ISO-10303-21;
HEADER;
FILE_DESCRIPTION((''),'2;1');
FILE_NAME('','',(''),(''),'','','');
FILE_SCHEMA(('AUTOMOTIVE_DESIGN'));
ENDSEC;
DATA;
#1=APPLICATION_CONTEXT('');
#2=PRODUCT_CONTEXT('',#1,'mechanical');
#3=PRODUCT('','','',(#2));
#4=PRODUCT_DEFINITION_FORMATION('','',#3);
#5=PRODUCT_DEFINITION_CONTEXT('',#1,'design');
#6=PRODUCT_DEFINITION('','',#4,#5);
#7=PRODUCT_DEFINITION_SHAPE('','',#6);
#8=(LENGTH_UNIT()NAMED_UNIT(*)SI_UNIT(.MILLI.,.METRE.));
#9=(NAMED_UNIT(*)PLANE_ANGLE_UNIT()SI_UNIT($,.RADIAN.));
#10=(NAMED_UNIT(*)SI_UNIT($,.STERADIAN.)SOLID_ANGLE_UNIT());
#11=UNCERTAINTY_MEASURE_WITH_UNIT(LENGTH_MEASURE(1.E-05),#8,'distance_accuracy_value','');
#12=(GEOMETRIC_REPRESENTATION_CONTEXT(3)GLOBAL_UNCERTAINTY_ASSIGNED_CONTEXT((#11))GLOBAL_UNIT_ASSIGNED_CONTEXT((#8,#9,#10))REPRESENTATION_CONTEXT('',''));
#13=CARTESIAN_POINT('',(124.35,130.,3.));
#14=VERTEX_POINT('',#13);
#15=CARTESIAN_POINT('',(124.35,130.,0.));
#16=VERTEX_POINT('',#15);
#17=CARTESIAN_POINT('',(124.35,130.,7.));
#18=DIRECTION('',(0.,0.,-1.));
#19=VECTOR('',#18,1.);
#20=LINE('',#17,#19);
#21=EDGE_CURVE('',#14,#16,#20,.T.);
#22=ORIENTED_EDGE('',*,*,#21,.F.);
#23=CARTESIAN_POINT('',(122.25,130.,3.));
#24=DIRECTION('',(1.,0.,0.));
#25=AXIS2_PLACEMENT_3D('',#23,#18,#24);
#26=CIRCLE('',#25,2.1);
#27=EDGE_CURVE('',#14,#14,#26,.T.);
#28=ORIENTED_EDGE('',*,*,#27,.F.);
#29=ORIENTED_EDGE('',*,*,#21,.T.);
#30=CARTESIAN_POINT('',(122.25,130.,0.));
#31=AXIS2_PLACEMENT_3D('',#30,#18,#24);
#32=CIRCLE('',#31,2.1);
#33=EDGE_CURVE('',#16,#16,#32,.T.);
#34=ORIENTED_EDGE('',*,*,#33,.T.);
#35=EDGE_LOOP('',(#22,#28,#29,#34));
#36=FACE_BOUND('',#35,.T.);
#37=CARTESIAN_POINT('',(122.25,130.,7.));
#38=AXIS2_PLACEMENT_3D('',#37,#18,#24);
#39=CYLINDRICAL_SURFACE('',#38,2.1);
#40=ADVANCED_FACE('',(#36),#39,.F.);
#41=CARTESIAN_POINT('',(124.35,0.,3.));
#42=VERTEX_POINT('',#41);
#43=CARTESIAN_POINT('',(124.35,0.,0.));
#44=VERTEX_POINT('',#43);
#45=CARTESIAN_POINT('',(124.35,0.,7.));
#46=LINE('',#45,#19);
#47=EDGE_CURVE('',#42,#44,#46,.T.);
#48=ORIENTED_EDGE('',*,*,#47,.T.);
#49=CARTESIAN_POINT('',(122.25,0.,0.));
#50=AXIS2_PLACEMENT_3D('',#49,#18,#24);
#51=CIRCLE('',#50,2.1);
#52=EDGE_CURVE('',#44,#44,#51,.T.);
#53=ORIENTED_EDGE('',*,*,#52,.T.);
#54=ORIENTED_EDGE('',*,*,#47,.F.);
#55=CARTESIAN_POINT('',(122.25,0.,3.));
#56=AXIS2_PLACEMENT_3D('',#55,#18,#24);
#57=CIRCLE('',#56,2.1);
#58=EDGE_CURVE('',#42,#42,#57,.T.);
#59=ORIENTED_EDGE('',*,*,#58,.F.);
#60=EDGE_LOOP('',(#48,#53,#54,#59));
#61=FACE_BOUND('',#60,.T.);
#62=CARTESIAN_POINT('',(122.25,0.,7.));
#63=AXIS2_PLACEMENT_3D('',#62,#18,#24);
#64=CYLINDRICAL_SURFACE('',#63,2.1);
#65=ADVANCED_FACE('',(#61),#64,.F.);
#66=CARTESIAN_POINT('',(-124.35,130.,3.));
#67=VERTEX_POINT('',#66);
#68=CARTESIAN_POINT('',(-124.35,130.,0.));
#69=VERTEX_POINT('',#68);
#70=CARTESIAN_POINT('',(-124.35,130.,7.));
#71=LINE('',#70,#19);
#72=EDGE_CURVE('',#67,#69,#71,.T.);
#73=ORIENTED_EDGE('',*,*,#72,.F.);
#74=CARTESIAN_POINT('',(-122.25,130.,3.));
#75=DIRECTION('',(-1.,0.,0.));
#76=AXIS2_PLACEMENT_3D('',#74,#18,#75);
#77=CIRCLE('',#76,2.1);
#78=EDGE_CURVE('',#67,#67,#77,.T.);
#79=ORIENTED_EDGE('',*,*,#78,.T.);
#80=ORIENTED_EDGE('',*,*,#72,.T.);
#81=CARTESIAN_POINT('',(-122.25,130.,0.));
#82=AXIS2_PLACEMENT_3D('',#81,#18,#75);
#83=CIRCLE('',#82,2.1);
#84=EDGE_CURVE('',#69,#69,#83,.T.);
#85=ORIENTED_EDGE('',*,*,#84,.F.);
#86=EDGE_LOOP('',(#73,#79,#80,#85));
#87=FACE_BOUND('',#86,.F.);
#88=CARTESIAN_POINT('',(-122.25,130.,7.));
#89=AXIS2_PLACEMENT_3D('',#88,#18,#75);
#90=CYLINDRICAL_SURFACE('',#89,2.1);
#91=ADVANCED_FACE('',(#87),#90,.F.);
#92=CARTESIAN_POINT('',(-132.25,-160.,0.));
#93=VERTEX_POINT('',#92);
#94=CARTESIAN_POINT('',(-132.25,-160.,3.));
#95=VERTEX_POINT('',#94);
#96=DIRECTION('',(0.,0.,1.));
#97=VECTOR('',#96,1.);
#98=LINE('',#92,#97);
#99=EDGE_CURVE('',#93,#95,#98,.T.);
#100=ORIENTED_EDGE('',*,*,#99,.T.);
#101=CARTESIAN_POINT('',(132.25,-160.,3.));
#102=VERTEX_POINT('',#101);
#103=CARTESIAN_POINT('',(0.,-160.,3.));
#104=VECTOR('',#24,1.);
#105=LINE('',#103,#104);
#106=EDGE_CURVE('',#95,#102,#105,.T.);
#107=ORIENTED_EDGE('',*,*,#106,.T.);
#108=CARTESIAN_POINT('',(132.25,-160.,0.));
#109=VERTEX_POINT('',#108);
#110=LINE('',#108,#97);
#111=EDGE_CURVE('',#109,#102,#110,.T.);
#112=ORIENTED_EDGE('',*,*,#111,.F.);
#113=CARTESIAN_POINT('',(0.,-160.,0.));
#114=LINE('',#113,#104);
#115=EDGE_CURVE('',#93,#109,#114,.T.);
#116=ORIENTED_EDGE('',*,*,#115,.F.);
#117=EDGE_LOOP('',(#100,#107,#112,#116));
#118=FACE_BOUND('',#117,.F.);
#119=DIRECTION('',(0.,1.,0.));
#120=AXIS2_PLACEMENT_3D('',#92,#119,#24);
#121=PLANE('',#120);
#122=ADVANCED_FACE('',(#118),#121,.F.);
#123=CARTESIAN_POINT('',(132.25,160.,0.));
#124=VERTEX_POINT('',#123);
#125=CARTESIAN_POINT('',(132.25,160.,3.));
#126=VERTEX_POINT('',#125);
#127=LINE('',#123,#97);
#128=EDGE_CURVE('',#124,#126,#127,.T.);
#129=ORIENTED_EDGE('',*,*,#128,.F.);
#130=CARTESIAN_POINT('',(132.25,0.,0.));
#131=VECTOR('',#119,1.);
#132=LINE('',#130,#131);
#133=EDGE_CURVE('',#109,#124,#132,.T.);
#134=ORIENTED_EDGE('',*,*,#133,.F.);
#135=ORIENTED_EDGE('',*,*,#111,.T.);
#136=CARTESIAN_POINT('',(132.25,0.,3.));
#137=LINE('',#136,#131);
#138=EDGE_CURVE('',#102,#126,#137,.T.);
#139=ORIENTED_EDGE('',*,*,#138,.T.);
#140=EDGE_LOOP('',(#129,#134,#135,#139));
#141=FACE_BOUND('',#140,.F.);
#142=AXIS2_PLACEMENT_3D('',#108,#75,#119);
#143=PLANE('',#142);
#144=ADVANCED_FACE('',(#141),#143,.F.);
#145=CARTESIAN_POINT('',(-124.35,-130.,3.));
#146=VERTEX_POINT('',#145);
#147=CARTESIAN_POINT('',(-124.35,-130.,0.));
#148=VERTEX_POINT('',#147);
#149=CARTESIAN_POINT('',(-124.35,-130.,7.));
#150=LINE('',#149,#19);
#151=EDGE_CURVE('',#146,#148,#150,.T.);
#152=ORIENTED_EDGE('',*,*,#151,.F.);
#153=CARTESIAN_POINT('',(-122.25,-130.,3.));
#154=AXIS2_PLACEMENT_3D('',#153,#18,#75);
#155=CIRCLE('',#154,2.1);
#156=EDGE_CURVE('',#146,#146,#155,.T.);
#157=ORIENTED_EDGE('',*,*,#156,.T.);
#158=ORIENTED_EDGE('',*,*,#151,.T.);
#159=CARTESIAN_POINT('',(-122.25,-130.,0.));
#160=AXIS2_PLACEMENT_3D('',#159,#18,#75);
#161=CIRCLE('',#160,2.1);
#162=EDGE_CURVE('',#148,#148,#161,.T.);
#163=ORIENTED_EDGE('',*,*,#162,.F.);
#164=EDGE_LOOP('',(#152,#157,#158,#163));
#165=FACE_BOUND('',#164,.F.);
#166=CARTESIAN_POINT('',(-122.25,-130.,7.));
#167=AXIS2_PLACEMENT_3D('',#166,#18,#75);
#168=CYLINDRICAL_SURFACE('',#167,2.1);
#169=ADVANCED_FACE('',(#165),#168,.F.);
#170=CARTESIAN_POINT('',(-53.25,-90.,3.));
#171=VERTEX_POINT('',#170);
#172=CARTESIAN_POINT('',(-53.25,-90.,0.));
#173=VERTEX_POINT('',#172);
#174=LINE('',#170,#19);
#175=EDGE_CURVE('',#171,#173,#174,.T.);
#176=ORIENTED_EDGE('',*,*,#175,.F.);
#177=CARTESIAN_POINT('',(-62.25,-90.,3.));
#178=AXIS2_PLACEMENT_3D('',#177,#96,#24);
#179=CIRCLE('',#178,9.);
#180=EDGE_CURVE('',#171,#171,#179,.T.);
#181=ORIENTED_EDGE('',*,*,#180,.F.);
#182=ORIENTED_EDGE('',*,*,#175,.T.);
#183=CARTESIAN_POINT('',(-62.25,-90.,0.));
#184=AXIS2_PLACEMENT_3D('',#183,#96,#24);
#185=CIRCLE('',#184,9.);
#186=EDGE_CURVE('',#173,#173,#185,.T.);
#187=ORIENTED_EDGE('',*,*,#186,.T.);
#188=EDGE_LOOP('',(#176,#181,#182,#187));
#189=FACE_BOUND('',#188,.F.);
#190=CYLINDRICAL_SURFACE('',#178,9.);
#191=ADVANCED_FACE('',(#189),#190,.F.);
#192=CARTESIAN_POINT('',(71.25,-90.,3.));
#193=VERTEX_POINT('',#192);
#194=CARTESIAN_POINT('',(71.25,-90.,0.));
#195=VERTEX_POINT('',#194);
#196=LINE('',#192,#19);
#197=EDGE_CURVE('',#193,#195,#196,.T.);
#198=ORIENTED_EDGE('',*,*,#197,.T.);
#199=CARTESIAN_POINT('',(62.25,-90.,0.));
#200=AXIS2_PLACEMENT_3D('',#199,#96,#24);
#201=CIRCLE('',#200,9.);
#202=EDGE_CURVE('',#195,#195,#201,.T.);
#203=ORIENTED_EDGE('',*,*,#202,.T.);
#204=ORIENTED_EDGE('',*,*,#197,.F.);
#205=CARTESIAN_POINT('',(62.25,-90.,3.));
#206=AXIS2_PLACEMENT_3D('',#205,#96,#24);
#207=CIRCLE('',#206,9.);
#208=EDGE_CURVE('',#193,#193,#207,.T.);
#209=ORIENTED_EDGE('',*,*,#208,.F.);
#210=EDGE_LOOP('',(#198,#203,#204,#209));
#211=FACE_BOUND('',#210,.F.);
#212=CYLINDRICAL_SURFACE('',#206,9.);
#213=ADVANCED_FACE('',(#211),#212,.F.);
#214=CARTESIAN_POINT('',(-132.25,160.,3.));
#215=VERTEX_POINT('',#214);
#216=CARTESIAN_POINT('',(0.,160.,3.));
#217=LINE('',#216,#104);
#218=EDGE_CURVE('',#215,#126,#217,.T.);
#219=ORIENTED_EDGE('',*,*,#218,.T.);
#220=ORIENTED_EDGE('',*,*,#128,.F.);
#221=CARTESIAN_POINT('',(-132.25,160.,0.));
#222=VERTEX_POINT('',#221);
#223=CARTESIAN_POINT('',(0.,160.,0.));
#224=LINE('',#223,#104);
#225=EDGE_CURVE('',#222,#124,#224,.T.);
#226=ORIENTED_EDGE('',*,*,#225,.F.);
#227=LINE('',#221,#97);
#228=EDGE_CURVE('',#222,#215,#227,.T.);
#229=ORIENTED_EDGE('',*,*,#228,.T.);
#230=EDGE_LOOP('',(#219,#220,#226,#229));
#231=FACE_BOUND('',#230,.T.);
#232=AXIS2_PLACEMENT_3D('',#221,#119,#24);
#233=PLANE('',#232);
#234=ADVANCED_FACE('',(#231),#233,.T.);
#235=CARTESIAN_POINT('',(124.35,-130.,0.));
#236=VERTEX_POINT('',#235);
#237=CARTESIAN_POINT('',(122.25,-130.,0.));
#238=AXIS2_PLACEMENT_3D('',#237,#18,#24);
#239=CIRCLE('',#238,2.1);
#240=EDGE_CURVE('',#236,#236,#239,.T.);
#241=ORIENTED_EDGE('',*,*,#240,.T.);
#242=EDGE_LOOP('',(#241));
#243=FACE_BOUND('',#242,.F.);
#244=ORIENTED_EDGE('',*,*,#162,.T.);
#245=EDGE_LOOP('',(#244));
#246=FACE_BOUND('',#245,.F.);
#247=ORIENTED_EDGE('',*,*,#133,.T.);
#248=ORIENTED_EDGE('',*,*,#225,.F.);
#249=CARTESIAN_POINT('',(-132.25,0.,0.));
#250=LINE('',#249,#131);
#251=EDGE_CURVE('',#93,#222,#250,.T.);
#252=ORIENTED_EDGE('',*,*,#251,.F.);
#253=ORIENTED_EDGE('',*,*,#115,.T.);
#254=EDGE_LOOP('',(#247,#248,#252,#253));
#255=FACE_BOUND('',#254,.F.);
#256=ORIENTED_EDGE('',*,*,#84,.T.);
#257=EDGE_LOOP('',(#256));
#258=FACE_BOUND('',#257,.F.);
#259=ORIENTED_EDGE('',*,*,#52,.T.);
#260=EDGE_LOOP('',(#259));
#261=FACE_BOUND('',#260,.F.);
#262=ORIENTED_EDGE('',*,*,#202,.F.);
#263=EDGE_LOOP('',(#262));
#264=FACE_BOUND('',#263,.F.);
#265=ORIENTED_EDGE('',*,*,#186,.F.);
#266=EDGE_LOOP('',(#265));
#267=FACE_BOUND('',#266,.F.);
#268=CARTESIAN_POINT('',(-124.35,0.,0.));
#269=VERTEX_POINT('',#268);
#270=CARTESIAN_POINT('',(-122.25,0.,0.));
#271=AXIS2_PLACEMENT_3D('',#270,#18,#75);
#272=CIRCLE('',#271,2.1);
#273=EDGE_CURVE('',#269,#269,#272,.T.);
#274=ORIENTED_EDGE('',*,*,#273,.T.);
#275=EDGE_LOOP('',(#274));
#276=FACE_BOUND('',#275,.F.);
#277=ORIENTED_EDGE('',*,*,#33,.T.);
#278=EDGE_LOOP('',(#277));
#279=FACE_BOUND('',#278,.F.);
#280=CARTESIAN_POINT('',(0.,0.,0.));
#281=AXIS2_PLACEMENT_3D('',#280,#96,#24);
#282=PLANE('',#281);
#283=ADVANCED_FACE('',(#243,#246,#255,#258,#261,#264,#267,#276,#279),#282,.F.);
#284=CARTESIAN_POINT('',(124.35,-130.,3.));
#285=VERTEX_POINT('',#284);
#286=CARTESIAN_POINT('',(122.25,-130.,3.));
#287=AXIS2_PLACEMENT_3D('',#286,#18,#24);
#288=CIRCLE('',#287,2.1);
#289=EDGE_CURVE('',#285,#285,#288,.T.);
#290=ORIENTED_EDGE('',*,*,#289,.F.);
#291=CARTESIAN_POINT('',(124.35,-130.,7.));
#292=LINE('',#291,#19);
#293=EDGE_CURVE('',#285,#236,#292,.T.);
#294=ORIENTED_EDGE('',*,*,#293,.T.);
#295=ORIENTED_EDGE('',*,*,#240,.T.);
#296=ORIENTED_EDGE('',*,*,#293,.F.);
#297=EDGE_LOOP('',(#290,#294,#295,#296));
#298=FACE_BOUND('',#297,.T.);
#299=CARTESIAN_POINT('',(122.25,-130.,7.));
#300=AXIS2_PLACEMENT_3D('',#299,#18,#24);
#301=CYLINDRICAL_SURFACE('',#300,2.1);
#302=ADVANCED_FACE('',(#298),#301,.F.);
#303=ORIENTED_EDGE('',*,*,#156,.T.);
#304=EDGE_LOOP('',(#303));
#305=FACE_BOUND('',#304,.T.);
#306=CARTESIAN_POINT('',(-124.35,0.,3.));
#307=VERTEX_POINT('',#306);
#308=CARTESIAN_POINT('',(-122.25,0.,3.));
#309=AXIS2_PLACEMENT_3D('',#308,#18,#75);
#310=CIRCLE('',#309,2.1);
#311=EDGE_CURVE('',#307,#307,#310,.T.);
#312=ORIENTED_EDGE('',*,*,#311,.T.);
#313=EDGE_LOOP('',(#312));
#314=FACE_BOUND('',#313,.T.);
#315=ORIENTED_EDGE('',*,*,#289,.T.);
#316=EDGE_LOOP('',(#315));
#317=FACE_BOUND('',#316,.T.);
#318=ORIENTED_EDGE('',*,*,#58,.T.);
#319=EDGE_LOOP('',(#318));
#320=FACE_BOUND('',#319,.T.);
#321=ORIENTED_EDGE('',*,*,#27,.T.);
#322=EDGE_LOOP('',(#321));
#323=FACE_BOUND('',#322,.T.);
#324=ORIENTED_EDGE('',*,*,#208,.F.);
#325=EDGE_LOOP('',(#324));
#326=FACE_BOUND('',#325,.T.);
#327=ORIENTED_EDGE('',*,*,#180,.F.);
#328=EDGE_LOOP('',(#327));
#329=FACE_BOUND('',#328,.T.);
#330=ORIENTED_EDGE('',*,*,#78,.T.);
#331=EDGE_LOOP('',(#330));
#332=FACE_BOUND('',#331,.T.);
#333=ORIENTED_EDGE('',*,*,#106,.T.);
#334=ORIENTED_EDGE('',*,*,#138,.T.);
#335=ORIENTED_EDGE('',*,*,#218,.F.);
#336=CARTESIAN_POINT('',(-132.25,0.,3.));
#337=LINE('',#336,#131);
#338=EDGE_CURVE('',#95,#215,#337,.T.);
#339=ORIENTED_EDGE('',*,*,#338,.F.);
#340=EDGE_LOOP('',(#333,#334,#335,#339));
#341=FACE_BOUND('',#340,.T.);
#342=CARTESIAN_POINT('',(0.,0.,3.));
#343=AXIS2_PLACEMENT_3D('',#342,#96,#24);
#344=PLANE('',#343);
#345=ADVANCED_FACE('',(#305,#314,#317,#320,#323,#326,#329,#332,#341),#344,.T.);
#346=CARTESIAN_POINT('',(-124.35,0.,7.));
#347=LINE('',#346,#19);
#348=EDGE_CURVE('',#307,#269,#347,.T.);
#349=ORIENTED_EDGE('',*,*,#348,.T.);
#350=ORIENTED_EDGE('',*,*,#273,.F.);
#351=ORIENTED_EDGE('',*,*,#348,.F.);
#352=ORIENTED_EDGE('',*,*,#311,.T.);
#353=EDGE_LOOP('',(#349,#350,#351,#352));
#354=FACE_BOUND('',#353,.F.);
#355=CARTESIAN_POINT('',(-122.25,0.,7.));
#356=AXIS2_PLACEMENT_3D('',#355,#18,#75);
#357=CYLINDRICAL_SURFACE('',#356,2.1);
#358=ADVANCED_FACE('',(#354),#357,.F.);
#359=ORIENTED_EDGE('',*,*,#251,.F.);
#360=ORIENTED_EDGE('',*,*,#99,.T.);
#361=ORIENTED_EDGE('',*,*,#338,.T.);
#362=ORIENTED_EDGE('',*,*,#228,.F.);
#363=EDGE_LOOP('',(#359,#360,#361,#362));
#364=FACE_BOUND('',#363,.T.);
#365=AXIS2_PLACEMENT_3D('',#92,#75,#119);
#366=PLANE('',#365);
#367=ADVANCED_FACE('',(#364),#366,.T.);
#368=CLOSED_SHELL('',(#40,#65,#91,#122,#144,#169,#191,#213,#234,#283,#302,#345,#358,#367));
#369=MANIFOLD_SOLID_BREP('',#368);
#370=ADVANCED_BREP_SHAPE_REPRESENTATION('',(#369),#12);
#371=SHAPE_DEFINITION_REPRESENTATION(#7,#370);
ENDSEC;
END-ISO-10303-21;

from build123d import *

# Parameters (mm, degrees)
F1_W     = 264.5
F1_H     = 320
F2_DEPTH = 3
F4_D     = 4.2
F4_DEPTH = 4
F4_TIP   = 1.2618073
F5_R     = 9
F6_DEPTH = 3


# Not quite as in the source:
# - a pattern or mirror of a feature is missing from the dataset's text; its kind, count and spacing are read off the source's solid


with BuildPart() as f2:
    # F1 (on Top) → F2 (new body)
    with BuildSketch(Plane.XY):
        Rectangle(F1_W, F1_H)
    extrude(amount=F2_DEPTH)

    # F4
    with Locations(Plane.XY.offset(3)):
        with Locations((-122.25, 130), (-122.25, 0), (-122.25, -130)):
            f4 = Hole(F4_D / 2, depth=F4_DEPTH)
            with Locations((0, 0, -(F4_DEPTH + F4_TIP / 2))):  # 118° drill point
                Cone(0, F4_D / 2, F4_TIP, mode=Mode.SUBTRACT)

    # F4_copies: F4 across plane
    add(f4.mirror(Plane(origin=(0, 0, 0), x_dir=(0, 0, 1), z_dir=(1, 0, 0))), mode=Mode.SUBTRACT)

    # F5 (on face) → F6 (cut, through all)
    with BuildSketch(Plane.XY.offset(3)):
        with Locations((-62.25, -90)):
            Circle(F5_R)
        with Locations((62.25, -90)):
            Circle(F5_R)
    extrude(amount=-F6_DEPTH, mode=Mode.SUBTRACT)


solid = f2.part
